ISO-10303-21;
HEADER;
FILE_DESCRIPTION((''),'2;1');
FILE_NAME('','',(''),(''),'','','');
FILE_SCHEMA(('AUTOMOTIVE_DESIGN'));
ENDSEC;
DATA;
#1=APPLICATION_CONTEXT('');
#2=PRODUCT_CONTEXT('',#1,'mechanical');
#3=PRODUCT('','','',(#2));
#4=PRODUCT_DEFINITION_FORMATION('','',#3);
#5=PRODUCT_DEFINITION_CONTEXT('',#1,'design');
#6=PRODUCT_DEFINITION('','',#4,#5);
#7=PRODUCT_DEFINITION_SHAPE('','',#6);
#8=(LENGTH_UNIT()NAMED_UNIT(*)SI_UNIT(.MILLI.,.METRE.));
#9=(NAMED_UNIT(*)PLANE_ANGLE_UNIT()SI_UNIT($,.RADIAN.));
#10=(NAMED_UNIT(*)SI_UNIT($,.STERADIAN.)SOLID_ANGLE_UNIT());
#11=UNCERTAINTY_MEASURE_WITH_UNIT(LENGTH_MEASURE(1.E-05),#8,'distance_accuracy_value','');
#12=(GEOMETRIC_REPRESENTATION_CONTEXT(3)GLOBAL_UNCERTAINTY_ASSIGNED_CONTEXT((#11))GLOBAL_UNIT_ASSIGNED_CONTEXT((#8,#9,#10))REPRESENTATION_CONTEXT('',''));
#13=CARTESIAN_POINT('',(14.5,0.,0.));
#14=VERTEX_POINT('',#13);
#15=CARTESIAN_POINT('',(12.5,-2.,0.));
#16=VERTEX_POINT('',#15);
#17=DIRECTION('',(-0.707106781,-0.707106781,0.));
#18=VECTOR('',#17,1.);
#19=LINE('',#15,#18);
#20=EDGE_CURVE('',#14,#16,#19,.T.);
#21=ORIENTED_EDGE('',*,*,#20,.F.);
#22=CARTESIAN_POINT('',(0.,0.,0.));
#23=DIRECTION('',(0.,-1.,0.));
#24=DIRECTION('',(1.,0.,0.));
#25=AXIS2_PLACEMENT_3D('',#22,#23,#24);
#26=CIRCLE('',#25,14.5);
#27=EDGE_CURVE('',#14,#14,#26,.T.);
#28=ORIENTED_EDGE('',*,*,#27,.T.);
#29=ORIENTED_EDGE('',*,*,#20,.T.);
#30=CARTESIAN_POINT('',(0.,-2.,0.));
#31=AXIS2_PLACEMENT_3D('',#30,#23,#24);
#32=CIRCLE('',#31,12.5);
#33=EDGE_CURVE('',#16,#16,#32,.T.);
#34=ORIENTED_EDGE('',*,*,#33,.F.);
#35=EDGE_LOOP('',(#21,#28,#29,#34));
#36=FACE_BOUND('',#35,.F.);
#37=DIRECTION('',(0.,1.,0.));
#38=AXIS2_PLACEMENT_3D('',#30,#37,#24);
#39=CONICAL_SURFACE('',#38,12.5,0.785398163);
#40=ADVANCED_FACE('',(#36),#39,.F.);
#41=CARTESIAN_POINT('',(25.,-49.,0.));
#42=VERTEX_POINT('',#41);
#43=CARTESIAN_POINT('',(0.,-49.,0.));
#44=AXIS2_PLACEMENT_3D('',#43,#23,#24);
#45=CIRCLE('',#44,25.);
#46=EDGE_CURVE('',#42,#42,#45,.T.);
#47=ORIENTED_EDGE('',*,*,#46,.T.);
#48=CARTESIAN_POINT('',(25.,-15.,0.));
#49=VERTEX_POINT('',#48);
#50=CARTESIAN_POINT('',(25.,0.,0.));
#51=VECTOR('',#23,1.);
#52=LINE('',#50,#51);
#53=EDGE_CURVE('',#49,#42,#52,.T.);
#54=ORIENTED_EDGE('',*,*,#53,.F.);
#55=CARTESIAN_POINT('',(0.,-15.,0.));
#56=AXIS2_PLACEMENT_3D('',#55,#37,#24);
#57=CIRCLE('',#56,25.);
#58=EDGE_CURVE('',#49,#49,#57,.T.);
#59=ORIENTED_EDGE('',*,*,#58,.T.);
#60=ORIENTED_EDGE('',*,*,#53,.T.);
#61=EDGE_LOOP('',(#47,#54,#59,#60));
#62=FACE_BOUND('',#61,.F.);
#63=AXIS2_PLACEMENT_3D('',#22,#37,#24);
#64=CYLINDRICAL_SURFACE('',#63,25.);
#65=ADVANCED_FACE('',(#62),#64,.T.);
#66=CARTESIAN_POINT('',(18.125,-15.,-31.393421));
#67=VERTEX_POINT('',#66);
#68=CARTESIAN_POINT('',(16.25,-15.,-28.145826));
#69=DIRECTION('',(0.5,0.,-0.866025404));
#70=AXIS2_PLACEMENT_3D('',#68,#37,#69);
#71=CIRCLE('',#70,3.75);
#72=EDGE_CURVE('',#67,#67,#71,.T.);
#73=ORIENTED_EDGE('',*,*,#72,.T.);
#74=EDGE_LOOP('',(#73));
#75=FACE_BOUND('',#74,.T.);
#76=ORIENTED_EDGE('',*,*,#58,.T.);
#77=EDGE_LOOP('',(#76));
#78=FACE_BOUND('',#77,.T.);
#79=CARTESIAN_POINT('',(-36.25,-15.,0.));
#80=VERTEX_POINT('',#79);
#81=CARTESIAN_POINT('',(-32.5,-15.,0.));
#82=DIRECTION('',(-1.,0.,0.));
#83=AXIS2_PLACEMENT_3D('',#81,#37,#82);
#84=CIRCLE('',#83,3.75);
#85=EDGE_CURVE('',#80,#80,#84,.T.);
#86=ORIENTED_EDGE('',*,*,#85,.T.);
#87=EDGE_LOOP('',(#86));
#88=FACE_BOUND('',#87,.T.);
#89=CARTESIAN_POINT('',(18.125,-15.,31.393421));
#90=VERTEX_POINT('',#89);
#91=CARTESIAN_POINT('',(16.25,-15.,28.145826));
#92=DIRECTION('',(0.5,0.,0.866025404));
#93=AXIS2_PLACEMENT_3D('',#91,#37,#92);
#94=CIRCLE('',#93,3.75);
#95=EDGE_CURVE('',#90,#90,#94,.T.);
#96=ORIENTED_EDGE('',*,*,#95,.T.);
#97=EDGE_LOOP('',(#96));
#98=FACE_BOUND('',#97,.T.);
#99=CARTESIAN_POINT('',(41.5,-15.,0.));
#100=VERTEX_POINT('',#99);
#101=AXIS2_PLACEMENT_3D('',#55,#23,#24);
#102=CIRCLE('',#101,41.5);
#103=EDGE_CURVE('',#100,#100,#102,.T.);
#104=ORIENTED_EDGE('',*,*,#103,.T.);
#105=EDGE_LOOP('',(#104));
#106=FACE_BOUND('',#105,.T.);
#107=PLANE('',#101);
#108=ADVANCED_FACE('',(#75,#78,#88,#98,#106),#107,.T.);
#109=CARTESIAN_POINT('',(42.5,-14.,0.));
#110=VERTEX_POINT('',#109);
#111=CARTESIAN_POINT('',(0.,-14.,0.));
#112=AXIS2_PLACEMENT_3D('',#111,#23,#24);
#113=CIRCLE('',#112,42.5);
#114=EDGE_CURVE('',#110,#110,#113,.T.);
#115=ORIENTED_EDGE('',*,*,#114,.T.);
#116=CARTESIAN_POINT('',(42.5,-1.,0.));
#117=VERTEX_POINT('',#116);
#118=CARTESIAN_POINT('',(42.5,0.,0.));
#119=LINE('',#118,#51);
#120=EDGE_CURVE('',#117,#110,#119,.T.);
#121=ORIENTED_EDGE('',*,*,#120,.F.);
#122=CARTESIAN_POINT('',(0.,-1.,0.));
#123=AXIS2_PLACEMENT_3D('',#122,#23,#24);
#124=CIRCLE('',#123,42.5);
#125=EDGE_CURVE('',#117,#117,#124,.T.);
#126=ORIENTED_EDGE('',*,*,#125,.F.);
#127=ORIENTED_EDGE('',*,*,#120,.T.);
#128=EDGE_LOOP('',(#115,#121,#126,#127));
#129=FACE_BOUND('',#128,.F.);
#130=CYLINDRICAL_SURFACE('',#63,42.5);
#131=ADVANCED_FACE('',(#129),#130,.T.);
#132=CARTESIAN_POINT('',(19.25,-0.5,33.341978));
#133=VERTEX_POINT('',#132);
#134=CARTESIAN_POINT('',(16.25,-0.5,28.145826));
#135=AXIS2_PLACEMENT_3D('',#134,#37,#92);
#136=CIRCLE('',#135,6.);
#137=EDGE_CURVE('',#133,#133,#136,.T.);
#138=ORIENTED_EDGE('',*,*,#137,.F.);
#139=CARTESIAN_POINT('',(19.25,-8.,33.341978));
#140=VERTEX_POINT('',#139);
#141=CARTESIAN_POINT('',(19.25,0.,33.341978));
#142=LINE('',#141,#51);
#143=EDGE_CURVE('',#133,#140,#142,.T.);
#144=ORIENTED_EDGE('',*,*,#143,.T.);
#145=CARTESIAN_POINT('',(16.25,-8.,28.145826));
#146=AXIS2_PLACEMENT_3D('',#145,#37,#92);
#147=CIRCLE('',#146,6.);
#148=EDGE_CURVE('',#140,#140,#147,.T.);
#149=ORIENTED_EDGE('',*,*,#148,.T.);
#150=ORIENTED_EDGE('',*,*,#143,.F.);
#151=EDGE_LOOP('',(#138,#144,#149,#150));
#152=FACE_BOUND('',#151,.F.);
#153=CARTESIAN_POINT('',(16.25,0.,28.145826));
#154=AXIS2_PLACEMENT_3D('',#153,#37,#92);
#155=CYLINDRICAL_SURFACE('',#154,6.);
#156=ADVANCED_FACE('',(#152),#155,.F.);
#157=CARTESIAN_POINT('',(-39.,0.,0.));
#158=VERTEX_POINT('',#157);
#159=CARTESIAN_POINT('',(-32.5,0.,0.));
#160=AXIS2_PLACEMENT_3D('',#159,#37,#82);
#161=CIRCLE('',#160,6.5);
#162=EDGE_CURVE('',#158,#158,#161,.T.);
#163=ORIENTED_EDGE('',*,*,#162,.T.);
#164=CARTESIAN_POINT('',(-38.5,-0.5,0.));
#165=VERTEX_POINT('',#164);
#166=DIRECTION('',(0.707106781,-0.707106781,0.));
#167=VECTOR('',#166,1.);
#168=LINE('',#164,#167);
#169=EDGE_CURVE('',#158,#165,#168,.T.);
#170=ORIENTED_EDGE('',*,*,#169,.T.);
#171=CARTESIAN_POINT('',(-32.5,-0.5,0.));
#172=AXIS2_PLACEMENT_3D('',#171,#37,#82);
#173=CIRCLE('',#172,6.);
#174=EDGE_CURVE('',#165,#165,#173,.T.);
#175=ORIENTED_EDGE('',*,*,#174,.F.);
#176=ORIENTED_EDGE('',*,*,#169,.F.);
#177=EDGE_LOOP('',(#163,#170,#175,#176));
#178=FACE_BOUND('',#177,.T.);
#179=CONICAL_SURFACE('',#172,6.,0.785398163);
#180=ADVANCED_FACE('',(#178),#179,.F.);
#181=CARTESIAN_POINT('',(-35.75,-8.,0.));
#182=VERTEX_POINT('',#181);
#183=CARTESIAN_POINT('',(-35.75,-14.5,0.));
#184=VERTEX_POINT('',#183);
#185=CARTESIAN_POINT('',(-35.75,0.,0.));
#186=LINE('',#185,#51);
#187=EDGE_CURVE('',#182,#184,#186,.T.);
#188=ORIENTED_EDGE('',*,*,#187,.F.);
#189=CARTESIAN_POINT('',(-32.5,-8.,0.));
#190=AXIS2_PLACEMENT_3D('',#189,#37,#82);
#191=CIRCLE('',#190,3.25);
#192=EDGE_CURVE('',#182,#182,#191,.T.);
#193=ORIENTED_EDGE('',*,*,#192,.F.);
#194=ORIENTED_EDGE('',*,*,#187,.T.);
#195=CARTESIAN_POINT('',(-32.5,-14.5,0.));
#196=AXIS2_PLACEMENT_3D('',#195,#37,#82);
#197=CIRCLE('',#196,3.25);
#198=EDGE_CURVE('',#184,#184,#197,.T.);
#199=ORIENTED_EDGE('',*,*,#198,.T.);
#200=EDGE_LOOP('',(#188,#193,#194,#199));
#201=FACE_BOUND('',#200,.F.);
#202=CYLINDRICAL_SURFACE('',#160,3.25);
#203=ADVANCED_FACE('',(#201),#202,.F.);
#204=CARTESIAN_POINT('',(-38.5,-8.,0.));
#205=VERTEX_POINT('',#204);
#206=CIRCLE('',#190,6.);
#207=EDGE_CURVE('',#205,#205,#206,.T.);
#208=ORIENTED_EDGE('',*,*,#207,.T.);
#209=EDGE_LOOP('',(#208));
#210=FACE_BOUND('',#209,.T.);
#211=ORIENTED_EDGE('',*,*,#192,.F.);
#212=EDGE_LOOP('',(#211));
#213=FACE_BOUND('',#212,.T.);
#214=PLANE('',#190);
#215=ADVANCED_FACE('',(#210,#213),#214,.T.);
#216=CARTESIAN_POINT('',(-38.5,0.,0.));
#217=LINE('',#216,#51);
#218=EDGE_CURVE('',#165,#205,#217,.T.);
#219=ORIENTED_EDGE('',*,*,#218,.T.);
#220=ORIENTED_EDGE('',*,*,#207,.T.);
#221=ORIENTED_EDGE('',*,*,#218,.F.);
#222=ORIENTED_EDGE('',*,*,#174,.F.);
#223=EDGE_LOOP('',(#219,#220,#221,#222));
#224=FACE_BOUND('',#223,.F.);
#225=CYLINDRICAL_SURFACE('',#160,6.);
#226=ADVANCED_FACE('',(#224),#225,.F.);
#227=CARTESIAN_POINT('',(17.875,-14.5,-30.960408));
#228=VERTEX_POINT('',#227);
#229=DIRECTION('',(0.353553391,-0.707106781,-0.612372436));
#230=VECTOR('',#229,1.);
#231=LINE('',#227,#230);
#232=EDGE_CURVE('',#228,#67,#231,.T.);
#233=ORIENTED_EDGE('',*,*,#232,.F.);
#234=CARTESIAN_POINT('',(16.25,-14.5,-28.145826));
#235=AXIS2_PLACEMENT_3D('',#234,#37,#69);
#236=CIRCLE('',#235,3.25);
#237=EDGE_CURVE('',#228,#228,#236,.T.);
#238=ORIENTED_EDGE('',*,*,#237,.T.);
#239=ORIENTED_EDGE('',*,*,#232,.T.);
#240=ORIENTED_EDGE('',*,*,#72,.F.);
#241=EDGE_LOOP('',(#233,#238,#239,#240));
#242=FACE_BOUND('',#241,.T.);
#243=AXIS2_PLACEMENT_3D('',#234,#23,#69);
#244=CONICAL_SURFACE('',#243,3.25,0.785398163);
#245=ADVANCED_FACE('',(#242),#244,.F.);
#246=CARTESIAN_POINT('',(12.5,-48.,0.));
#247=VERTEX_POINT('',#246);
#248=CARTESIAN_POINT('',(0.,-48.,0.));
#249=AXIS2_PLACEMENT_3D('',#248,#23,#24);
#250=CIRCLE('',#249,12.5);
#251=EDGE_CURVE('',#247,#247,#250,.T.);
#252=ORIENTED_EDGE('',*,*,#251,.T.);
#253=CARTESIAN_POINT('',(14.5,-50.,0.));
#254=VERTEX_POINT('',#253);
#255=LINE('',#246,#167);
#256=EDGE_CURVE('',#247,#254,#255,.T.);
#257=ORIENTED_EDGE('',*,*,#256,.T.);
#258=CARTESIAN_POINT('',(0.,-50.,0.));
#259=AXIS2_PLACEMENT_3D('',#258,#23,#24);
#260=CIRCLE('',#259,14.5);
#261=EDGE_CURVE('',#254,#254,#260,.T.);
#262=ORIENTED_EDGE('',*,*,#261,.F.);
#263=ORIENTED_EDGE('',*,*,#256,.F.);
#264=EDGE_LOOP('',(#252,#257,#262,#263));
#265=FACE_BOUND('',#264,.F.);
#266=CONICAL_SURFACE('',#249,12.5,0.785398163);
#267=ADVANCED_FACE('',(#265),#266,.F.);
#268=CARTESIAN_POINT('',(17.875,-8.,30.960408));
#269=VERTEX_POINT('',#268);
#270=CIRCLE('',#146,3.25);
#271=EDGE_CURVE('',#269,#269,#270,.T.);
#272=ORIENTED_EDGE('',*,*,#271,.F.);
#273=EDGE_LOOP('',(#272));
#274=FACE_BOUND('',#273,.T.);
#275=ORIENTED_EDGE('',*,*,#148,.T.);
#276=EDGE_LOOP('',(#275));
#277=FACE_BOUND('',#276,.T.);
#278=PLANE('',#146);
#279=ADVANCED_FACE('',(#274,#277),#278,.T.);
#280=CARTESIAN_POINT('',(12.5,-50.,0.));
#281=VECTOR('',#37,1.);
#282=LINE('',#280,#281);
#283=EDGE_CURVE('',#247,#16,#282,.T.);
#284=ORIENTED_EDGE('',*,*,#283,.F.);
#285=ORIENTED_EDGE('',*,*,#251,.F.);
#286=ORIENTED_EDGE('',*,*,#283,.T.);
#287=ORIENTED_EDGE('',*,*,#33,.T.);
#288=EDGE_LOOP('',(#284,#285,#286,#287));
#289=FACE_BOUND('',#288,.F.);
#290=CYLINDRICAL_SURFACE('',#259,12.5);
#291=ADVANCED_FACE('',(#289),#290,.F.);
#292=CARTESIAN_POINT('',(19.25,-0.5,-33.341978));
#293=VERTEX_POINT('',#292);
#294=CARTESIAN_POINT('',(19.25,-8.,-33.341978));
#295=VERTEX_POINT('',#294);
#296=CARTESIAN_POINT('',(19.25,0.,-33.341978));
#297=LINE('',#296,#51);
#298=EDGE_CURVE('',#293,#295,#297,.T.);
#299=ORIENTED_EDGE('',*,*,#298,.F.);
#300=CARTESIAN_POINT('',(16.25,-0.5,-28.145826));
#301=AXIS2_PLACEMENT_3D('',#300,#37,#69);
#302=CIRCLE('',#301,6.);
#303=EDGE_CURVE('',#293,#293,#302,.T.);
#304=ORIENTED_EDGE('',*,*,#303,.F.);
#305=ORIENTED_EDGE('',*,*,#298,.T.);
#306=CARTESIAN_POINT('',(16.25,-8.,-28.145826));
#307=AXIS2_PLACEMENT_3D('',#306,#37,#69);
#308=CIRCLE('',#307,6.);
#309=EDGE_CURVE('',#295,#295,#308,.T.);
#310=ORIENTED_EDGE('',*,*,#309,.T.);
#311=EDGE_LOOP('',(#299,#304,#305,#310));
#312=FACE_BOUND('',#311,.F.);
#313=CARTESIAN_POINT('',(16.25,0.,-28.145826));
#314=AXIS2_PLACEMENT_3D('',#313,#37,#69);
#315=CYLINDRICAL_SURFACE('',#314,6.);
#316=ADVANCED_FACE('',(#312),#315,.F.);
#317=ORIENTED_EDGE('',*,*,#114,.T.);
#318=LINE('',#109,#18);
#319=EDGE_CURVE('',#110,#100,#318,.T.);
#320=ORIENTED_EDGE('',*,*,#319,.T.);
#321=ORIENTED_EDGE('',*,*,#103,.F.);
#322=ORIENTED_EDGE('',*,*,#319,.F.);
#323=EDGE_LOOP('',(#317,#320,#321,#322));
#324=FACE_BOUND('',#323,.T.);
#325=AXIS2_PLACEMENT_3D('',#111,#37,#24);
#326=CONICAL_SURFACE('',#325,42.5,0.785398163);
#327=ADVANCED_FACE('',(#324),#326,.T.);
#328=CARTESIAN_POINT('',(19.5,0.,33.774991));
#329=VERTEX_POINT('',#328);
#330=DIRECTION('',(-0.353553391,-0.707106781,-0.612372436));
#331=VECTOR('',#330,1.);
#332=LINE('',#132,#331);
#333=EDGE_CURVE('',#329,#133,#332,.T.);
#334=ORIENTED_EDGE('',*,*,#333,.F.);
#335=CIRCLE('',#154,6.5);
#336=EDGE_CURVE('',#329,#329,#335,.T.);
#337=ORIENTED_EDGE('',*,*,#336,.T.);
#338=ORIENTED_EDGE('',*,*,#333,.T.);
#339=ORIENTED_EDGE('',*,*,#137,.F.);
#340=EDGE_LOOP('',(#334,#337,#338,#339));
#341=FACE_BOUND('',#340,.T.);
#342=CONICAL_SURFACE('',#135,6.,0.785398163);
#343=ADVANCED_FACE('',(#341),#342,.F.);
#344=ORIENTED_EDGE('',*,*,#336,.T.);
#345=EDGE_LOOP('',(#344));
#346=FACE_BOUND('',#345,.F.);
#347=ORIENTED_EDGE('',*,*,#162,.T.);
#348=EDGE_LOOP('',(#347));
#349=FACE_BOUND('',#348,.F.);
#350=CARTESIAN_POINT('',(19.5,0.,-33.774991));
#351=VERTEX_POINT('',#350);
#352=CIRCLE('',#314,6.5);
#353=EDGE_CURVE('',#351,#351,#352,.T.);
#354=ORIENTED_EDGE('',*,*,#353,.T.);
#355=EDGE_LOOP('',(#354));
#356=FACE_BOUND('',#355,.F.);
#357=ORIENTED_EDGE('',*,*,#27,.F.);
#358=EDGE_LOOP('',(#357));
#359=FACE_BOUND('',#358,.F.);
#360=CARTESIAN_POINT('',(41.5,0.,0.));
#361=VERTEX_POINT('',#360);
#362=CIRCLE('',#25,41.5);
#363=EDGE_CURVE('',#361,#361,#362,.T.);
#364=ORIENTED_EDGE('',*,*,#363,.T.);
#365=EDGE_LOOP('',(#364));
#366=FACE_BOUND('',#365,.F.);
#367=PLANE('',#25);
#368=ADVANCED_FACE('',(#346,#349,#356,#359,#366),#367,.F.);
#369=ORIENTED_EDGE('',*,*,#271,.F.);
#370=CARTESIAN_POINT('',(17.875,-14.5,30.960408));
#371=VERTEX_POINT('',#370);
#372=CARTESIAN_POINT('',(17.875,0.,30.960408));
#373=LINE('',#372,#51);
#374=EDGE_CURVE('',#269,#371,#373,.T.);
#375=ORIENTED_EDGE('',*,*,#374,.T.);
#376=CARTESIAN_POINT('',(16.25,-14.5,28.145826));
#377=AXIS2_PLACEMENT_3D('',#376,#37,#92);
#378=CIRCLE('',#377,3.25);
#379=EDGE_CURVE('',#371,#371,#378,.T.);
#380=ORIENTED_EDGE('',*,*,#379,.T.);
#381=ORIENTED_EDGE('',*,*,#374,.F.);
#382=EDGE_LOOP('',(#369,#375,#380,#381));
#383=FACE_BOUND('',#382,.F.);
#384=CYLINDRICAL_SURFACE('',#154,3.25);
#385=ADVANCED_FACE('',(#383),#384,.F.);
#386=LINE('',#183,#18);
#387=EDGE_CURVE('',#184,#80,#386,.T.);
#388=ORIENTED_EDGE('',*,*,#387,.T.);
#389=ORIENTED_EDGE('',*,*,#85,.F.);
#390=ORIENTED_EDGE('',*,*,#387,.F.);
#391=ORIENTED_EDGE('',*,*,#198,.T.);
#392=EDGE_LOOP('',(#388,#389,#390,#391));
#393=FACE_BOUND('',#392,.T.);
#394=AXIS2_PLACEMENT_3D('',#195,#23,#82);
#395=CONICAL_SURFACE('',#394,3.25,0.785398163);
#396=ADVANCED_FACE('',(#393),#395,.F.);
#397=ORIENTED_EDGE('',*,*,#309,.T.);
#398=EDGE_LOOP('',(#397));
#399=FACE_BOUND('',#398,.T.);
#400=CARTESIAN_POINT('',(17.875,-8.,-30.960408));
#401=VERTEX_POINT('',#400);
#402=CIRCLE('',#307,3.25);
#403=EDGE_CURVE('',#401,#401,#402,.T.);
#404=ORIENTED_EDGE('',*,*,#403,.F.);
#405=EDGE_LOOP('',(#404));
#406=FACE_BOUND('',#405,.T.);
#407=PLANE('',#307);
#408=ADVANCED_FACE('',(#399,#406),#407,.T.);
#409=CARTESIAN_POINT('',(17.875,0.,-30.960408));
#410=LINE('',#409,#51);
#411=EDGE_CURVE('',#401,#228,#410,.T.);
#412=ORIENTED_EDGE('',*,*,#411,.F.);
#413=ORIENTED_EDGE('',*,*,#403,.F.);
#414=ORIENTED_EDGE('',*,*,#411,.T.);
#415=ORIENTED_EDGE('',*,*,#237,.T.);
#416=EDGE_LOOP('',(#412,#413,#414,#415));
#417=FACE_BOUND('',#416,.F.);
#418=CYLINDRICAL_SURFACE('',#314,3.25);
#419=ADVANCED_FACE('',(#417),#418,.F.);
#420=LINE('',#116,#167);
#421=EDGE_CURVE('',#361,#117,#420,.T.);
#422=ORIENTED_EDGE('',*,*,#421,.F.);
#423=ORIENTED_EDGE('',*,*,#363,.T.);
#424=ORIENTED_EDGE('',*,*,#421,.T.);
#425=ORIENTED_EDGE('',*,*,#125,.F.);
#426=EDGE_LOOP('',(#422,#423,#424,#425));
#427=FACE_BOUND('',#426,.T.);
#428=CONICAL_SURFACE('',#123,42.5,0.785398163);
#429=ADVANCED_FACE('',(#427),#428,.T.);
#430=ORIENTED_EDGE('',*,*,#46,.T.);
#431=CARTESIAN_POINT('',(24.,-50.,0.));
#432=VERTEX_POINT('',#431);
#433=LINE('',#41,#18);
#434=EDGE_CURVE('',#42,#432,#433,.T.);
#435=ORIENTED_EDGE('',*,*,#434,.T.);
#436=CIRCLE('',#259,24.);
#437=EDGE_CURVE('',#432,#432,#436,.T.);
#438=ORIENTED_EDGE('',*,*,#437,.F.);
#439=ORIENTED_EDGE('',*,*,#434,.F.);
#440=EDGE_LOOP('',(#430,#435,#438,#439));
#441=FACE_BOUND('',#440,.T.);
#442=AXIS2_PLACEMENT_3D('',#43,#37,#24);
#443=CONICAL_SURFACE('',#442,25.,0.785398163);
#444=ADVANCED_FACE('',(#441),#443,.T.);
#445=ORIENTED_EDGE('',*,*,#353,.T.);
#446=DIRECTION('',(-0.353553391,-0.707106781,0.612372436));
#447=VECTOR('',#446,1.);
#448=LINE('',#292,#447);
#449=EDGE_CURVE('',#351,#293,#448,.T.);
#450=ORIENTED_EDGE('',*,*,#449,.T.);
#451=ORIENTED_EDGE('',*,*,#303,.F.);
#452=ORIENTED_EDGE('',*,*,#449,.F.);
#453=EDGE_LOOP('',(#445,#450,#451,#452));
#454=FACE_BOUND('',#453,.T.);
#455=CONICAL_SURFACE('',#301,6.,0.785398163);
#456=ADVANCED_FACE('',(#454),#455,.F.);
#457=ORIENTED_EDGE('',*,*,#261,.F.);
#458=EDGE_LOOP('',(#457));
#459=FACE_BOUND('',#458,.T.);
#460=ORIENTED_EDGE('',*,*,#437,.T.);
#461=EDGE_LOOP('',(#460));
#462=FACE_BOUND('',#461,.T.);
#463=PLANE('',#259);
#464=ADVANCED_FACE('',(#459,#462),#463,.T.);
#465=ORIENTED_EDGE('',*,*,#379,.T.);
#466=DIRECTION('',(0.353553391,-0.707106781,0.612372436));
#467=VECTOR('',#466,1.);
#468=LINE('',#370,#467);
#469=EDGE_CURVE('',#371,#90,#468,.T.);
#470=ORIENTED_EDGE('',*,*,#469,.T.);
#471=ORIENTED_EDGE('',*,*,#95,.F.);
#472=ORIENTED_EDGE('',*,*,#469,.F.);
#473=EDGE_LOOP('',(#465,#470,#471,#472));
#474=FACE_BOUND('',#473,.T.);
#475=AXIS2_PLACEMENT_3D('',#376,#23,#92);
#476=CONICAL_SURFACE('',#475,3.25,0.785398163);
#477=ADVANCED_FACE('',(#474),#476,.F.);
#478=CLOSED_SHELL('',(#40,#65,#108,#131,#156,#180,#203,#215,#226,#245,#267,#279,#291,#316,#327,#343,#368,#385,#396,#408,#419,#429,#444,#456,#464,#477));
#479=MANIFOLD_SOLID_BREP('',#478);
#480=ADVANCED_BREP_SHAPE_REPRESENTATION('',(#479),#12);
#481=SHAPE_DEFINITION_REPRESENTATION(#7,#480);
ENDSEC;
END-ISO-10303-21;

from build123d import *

# Parameters (mm, degrees)
F0_R            = 42.5
F0_R_2          = 25
F1_DEPTH        = 15
F2_DEPTH        = 50
F3_SIZE         = 1
F4_R            = 12.5
F5_DEPTH        = 50.001
F6_SIZE         = 2
F7_R            = 3.25
F8_DEPTH        = 50.001
F8_COPIES_COUNT = 3
F7_R_2          = 6
F9_DEPTH        = 8
F9_COPIES_COUNT = 3
F10_SIZE        = 0.5


# Not quite as in the source:
# - a pattern or mirror of a feature is missing from the dataset's text; its kind, count and spacing are read off the source's solid


with BuildPart() as f1:
    # F0 (on Front) → F1 (new body)
    with BuildSketch(Plane.XZ):
        Circle(F0_R)
        Circle(F0_R_2, mode=Mode.SUBTRACT)
        Circle(F0_R_2)
    extrude(amount=F1_DEPTH)

    # F0 (on Front) → F2 (join)
    with BuildSketch(Plane.XZ):
        Circle(F0_R_2)
    extrude(amount=F2_DEPTH)

    # F3
    f3_edges = [f1.edges().sort_by_distance(p)[0] for p in [
        (-42.5, 0, 0),
        (-42.5, -15, 0),
        (-25, -50, 0),
    ]]
    chamfer(f3_edges, length=F3_SIZE)

    # F4 (on face) → F5 (cut, through all)
    with BuildSketch(Plane.XZ.offset(50)):
        Circle(F4_R)
    extrude(amount=-F5_DEPTH, mode=Mode.SUBTRACT)

    # F6
    f6_edges = [f1.edges().sort_by_distance(p)[0] for p in [
        (-12.5, -50, 0),
        (-12.5, 0, 0),
    ]]
    chamfer(f6_edges, length=F6_SIZE)

    # F7 (on face) → F8 (cut, through all)
    with BuildSketch(Plane(origin=(0, 0, 0), x_dir=(-1, 0, 0), z_dir=(0, 1, 0))):
        with Locations((32.5, 0)):
            Circle(F7_R)
    f8 = extrude(amount=-F8_DEPTH, mode=Mode.SUBTRACT)

    # F8_copies: F8 ×3 about axis
    f8_copies_axis = Axis((0, 0, 0), (0, 1, 0))
    for i in range(1, F8_COPIES_COUNT):
        add(f8.rotate(f8_copies_axis, i * 360 / F8_COPIES_COUNT), mode=Mode.SUBTRACT)

    # F7 (on face) → F9 (cut)
    with BuildSketch(Plane(origin=(0, 0, 0), x_dir=(-1, 0, 0), z_dir=(0, 1, 0))):
        with Locations((32.5, 0)):
            Circle(F7_R_2)
        with Locations((32.5, 0)):
            Circle(F7_R, mode=Mode.SUBTRACT)
    f9 = extrude(amount=-F9_DEPTH, mode=Mode.SUBTRACT)

    # F9_copies: F9 ×3 about axis
    f9_copies_axis = Axis((0, 0, 0), (0, 1, 0))
    for i in range(1, F9_COPIES_COUNT):
        add(f9.rotate(f9_copies_axis, i * 360 / F9_COPIES_COUNT), mode=Mode.SUBTRACT)

    # F10
    f10_edges = [f1.edges().sort_by_distance(p)[0] for p in [
        (-26.5, 0, 0),
        (-29.25, -15, 0),
        (13.25, 0, -22.949673),
        (13.25, 0, 22.949673),
        (14.625, -15, -25.331243),
        (14.625, -15, 25.331243),
    ]]
    chamfer(f10_edges, length=F10_SIZE)


solid = f1.part
